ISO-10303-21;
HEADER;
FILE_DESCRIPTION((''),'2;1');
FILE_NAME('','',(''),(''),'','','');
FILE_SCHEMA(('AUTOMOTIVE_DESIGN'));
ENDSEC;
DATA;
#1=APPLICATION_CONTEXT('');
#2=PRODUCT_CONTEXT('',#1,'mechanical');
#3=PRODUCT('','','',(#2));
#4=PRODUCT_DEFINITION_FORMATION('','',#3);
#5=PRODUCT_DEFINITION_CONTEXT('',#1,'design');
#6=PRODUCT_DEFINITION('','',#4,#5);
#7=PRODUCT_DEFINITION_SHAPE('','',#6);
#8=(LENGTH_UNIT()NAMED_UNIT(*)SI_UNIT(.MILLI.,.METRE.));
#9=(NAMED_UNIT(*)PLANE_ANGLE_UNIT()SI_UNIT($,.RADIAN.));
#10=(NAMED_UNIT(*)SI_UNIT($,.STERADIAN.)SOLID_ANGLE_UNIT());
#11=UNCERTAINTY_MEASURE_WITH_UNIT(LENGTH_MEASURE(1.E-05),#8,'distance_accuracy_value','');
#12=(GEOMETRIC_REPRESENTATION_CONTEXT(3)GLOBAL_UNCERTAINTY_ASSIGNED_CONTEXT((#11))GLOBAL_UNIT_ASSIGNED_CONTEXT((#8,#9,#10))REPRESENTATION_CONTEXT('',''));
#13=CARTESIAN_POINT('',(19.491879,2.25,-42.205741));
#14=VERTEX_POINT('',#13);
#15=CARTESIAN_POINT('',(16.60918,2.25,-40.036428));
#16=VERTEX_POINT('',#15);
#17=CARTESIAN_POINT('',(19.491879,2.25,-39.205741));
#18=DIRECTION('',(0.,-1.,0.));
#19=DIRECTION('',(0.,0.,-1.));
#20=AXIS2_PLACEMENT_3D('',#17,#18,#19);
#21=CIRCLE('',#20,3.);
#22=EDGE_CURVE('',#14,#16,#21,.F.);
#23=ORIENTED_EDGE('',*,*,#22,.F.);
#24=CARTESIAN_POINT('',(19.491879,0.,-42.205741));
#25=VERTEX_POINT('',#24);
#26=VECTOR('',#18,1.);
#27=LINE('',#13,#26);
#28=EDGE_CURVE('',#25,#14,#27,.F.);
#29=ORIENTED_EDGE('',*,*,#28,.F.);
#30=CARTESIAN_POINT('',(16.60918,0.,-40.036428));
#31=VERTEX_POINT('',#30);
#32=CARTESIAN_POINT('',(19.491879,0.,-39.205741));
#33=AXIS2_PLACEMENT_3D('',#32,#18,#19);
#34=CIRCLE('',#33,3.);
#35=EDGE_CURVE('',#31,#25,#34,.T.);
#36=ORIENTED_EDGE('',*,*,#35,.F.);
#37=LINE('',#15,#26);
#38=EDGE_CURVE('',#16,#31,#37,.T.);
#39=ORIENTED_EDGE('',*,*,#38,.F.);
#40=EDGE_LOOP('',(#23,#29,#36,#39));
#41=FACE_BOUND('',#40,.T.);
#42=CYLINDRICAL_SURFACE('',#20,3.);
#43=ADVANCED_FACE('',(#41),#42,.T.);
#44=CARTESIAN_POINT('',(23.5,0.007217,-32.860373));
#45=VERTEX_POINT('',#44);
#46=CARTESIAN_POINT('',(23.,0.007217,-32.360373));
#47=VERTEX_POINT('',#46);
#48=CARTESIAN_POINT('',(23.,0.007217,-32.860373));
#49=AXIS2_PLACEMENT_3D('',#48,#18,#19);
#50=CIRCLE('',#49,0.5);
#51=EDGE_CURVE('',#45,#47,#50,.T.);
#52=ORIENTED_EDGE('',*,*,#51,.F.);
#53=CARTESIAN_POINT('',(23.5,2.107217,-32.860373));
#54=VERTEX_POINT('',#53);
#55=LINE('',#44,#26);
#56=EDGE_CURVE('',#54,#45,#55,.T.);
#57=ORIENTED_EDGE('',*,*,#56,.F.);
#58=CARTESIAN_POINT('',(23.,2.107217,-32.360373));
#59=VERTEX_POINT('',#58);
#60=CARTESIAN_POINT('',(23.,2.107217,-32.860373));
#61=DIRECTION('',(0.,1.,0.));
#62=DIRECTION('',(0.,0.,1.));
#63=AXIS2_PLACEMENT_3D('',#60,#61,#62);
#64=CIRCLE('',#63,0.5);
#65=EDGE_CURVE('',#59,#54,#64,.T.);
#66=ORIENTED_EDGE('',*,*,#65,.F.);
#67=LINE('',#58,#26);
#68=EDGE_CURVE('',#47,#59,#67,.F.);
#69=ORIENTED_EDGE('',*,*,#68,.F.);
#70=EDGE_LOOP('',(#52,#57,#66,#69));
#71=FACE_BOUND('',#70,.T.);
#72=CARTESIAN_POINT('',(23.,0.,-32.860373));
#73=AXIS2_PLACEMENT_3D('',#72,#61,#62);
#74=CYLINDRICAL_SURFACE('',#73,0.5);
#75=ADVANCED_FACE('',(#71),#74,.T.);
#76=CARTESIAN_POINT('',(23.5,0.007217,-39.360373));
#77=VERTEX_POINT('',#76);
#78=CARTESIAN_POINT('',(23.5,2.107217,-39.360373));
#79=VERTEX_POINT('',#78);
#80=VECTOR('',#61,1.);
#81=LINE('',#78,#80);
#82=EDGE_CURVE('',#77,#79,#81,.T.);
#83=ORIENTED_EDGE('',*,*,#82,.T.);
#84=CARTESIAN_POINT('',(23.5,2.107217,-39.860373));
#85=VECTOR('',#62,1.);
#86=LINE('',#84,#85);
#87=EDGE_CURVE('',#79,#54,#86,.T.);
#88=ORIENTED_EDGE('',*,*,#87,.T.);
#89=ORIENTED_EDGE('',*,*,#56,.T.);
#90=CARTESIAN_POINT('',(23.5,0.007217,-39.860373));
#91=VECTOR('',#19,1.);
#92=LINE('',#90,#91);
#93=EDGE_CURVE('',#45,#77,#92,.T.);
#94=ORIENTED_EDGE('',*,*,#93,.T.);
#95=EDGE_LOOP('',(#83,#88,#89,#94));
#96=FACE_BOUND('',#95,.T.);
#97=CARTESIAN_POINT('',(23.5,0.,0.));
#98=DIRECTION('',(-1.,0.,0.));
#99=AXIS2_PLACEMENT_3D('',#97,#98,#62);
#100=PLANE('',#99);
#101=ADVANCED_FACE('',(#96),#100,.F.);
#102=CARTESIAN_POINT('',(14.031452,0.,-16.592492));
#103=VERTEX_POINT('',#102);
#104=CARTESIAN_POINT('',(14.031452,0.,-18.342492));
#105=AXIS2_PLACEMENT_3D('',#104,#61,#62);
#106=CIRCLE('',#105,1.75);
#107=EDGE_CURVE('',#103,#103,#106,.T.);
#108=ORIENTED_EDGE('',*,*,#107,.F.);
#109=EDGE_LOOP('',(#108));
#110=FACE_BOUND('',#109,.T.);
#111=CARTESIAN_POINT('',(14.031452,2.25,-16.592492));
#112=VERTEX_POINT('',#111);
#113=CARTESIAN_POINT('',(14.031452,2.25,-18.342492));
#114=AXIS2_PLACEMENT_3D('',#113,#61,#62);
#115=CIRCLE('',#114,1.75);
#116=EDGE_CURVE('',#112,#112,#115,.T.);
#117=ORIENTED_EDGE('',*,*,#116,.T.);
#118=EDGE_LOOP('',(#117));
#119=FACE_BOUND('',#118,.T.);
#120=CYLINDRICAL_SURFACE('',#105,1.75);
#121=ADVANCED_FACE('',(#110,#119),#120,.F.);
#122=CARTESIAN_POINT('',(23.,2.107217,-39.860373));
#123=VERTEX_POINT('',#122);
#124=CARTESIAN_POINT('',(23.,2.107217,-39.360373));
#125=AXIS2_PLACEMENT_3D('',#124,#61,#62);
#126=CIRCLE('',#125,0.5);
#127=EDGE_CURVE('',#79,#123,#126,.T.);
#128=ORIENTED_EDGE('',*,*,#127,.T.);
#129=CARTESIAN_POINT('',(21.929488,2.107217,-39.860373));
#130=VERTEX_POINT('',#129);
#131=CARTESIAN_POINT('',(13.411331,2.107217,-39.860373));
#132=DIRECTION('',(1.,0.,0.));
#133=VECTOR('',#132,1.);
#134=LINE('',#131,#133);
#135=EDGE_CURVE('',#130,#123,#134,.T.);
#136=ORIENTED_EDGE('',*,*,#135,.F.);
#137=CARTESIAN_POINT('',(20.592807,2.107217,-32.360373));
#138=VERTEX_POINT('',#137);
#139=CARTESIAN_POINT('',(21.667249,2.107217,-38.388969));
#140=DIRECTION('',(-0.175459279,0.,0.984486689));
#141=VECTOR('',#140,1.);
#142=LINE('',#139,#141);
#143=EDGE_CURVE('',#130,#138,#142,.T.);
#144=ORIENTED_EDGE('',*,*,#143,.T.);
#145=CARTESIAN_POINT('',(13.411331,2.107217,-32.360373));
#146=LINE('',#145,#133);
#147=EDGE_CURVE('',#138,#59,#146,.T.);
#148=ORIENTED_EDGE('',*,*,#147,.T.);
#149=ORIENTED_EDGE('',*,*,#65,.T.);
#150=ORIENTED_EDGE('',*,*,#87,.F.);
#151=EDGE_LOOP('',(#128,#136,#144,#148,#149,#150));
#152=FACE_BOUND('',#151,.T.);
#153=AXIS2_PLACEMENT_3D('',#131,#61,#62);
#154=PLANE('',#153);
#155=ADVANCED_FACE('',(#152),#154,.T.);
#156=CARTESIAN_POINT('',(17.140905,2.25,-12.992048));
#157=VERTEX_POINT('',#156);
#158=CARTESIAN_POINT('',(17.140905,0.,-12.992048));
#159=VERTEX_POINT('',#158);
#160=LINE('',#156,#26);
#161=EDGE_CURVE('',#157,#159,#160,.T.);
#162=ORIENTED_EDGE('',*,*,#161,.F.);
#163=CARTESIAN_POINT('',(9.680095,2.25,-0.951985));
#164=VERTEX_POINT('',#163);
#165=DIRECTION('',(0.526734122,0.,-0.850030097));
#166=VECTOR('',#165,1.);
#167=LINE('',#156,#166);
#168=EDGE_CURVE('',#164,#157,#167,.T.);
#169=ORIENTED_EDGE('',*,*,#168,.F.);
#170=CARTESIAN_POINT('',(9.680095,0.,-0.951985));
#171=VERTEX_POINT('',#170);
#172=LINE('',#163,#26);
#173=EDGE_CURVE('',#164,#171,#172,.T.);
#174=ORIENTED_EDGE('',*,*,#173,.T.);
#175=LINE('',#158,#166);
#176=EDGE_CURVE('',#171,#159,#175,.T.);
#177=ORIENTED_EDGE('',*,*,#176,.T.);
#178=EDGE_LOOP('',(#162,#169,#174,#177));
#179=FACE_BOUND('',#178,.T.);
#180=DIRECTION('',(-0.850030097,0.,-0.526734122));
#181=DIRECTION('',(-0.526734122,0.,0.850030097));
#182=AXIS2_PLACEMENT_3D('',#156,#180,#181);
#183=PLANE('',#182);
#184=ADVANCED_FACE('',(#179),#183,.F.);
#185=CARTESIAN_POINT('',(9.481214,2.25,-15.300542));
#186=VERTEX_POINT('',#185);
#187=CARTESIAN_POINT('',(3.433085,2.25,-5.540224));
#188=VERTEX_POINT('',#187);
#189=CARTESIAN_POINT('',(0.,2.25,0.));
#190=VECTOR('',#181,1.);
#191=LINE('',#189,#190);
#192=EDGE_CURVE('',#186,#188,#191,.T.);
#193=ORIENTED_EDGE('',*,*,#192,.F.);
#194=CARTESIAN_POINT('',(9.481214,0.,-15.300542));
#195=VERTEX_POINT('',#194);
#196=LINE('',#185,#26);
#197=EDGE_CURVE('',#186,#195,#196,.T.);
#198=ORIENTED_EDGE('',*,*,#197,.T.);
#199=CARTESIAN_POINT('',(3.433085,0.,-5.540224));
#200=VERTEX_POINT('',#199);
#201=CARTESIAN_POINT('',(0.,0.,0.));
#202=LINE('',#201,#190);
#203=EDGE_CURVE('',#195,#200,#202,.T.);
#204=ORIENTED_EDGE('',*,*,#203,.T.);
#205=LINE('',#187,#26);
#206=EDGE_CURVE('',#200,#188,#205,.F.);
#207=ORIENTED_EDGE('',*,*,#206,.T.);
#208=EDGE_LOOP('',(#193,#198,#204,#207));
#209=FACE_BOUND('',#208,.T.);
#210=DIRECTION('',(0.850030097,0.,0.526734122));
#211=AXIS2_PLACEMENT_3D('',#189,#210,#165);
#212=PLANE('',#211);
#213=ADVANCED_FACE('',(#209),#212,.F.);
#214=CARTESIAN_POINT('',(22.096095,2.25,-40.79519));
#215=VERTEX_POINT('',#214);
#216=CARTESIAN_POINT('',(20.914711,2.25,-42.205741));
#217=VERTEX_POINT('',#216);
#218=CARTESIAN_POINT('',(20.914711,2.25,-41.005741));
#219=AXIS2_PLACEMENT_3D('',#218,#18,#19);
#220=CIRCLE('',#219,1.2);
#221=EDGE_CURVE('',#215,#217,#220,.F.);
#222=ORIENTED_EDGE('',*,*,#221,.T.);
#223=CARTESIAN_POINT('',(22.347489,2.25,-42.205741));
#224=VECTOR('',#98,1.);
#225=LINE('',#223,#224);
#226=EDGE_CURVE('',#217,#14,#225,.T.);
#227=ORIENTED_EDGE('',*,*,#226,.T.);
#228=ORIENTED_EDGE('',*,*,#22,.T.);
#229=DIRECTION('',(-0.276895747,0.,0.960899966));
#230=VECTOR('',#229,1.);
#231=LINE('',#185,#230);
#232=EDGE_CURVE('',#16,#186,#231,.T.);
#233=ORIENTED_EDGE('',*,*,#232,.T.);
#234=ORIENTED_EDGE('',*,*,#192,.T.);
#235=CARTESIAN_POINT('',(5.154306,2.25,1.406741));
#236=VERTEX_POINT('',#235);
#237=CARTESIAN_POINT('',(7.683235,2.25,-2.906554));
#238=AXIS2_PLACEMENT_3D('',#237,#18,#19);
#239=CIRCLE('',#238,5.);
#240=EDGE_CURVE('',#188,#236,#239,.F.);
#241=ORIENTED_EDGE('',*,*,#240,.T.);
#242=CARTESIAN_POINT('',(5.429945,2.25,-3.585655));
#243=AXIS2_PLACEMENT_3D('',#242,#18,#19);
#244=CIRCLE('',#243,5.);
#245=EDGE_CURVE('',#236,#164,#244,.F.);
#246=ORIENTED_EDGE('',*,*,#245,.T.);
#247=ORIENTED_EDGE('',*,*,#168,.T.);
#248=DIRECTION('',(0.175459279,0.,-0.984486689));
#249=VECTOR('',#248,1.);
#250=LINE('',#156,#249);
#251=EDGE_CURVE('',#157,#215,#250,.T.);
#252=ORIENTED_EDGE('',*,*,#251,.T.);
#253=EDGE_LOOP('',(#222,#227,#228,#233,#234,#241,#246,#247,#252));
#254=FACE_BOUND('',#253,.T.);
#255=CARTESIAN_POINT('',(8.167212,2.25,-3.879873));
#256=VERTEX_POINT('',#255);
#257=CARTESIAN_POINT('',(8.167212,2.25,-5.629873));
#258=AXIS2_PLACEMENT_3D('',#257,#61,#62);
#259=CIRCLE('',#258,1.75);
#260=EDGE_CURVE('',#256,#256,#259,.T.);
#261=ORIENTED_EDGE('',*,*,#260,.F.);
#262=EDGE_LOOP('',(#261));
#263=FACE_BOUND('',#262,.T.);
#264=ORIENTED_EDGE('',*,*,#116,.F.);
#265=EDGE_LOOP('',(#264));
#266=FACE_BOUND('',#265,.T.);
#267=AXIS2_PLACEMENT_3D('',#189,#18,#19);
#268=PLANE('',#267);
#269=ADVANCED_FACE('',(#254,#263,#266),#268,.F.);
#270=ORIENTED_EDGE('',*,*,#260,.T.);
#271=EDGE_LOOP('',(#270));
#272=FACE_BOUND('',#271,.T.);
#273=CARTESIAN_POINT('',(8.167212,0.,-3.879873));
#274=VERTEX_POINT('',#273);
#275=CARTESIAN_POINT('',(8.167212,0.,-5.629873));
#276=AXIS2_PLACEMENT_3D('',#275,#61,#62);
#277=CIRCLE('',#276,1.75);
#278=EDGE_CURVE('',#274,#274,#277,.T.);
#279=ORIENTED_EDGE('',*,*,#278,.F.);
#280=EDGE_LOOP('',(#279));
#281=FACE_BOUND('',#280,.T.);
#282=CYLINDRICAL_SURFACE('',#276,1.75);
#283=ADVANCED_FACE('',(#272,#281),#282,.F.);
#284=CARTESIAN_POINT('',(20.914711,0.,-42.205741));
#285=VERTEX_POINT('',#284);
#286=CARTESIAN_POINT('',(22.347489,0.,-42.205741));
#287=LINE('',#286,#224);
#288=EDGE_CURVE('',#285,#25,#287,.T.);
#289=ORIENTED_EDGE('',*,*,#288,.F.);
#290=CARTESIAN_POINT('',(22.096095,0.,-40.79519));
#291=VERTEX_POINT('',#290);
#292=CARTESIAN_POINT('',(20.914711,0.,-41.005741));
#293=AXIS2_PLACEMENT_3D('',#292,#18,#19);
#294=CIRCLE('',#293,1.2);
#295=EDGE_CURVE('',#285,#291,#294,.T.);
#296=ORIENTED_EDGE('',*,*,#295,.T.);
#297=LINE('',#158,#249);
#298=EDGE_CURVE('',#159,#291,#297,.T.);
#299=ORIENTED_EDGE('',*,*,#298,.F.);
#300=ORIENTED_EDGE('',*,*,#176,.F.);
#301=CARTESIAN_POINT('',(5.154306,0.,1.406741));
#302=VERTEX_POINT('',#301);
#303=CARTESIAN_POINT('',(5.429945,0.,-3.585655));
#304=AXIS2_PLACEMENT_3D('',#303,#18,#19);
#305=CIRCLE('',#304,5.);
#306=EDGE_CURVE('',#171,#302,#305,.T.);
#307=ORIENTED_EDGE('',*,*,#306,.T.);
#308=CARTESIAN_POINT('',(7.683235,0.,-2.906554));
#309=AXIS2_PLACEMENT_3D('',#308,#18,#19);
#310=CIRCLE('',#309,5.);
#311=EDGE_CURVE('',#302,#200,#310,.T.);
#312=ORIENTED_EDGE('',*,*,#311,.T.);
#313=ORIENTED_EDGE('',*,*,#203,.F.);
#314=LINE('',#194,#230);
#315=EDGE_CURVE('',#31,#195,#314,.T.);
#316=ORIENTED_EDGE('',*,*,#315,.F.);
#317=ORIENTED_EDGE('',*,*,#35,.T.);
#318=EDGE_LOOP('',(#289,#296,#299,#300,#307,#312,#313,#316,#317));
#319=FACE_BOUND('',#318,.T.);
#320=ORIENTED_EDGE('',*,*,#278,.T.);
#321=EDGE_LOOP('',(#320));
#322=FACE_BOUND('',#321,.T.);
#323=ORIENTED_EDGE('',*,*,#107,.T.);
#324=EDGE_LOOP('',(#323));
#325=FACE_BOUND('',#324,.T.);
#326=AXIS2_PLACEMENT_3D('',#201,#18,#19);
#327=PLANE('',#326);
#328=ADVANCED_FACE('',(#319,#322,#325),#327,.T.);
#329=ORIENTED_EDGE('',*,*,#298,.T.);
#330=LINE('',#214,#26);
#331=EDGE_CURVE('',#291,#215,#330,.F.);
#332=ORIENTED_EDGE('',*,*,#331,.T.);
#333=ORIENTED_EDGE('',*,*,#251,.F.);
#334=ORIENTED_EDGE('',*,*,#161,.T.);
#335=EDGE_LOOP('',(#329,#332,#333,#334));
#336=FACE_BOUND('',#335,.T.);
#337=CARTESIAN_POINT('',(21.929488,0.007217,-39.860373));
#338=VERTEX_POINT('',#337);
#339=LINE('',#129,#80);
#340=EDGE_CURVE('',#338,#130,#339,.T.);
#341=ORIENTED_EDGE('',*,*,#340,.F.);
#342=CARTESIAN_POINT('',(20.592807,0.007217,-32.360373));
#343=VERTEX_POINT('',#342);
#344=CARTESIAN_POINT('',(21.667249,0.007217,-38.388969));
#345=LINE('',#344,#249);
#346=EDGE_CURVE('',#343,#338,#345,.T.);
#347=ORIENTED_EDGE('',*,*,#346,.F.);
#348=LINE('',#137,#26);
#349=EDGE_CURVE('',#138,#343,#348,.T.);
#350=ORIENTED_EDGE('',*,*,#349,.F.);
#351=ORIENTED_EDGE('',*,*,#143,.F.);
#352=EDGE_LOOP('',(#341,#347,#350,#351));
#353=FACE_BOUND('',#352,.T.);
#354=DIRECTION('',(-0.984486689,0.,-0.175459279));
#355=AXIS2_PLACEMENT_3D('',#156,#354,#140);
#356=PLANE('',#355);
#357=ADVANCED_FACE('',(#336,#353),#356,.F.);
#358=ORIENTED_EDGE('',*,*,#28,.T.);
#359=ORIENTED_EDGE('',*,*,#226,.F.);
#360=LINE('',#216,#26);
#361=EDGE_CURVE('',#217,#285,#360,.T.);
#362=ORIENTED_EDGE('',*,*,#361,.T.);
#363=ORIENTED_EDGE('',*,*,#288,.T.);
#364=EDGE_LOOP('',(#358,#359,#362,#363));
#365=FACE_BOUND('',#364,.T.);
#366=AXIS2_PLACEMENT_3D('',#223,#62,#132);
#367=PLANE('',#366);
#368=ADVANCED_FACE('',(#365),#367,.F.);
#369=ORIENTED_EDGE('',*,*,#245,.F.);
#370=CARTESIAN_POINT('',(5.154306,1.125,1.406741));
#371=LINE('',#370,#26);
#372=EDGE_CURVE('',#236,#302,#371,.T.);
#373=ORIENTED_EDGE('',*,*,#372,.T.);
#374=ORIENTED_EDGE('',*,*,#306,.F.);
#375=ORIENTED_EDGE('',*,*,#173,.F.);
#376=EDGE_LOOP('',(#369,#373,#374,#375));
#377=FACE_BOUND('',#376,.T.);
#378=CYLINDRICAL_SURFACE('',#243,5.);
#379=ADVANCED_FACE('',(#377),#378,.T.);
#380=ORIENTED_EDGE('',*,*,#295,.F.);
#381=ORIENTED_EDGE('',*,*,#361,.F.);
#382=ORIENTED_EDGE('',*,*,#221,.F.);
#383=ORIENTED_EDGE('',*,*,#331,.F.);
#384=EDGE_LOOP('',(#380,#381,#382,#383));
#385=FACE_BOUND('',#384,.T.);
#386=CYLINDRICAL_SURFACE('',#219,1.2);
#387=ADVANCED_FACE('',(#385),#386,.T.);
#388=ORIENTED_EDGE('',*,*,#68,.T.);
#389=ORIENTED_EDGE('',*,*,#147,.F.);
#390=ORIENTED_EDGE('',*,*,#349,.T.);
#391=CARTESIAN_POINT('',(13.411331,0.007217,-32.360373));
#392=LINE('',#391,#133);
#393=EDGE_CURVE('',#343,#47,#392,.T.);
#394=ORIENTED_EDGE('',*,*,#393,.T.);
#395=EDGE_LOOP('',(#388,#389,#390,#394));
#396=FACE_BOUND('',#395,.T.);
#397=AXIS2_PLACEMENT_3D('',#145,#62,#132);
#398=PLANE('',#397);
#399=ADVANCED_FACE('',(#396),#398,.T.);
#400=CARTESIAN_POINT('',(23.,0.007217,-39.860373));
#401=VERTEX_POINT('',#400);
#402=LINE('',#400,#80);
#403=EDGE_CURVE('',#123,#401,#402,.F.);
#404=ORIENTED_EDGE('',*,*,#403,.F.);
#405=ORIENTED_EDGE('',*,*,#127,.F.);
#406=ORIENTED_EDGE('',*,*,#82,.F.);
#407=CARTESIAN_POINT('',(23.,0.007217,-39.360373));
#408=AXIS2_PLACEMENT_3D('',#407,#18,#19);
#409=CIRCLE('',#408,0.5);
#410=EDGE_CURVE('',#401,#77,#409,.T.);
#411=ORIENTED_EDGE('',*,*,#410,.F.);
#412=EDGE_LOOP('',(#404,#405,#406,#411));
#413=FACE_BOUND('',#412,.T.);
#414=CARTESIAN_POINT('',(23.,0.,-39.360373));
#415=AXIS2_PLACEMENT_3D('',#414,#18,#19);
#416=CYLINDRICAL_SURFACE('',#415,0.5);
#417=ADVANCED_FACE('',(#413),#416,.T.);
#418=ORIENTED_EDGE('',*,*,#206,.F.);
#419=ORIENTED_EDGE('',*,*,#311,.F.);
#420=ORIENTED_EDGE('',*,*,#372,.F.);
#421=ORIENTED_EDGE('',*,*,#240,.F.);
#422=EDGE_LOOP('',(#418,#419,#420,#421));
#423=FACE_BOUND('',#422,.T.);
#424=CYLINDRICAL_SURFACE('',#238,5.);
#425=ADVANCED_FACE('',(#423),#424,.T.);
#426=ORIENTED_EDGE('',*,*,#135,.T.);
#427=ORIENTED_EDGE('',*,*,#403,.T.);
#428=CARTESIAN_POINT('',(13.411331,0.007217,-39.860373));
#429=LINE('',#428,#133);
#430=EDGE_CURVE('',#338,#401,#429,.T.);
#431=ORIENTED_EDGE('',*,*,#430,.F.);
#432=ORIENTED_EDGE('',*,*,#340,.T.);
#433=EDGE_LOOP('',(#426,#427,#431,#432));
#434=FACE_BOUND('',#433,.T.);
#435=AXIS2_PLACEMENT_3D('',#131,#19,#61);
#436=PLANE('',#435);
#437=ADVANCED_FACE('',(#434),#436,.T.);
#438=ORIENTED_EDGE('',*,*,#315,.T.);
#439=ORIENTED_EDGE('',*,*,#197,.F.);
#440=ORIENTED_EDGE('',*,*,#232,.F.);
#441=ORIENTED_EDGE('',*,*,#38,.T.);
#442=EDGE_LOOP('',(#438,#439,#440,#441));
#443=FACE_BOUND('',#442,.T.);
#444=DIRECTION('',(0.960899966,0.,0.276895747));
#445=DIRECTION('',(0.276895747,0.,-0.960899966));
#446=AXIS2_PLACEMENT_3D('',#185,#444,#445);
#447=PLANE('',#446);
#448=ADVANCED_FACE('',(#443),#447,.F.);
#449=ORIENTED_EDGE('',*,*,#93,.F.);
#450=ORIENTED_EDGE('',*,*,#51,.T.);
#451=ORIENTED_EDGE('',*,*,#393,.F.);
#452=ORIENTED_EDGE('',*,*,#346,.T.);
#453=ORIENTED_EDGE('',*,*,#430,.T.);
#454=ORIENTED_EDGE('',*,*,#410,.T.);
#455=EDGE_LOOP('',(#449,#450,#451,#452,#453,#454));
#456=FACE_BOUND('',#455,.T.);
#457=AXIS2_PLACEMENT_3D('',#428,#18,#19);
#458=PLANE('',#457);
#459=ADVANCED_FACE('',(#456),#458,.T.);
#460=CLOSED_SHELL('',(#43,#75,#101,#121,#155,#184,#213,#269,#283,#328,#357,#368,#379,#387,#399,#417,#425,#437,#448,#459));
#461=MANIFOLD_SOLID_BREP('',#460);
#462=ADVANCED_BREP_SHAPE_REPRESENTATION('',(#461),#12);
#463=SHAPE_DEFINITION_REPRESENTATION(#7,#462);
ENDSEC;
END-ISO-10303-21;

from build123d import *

# Parameters (mm, degrees)
BOSS_EXTRUDE1_DEPTH = 2.25
FILLET1_R           = 5
SKETCH2_R           = 1.75
CUT_EXTRUDE1_DEPTH  = 48.810012982
BOSS_EXTRUDE2_REACH = 42.044
SKETCH4_W           = 7.5
SKETCH4_H           = 2.1
SKETCH4_2_W         = 7.5
SKETCH4_2_H         = 2.1
BOSS_EXTRUDE3_DEPTH = 1.570511633
FILLET2_R           = 3
FILLET3_R           = 1.2
FILLET4_R           = 0.5


with BuildPart() as part:
    # Sketch1 → Boss-Extrude1 (new body)
    with BuildSketch(Plane(origin=(0, 0, 0), x_dir=(1, 0, 0), z_dir=(0, 1, 0))):
        Polygon((0, 0), (9.481214188, 15.300541739), (17.234295106, 42.205740796), (22.347489461, 42.205740796), (17.140904697, 12.99204844), (7.659690509, -2.308493299), align=None)
    extrude(amount=BOSS_EXTRUDE1_DEPTH)

    # Fillet1
    # the kernel refuses this fillet: 5 mm, written as the material it takes off along each edge
    with BuildSketch(Plane(origin=(7.659690509, -9.589301146, 2.308493299), x_dir=(0.5267341215597666, 0, -0.8500300966346198), z_dir=(0, 1, 0))) as fillet1_piece_1:
        with BuildLine():
            CenterArc((FILLET1_R * 0.767144091705, FILLET1_R), FILLET1_R, 195.013192562, 74.986807438)
            Line((-FILLET1_R * 0.19872211495, FILLET1_R * 0.740958553812), (0, 0))
            Line((0, 0), (FILLET1_R * 0.767144091705, 0))
        make_face()
    extrude(amount=21.428602293, mode=Mode.SUBTRACT)
    with BuildSketch(Plane(origin=(0, -16.294200966, 0), x_dir=(0.5267341215597675, 0, -0.8500300966346193), z_dir=(0, 1, 0))) as fillet1_piece_2:
        with BuildLine():
            CenterArc((FILLET1_R * 1.30353607727, -FILLET1_R), FILLET1_R, 90, 105.013192562)
            Line((FILLET1_R * 0.337669870614, -FILLET1_R * 1.25904144619), (0, 0))
            Line((0, 0), (FILLET1_R * 1.30353607727, 0))
        make_face()
    extrude(amount=34.838401932, mode=Mode.SUBTRACT)

    # Sketch2 → Cut-Extrude1 (cut, through all)
    with BuildSketch(Plane(origin=(0, 2.25, 0), x_dir=(1, 0, 0), z_dir=(0, 1, 0))):
        with Locations(Location((8.167211871, 5.629873064, 0), (0, 0, 270))):
            Circle(SKETCH2_R)
        with Locations(Location((14.031451824, 18.342492377, 0), (0, 0, 270))):
            Circle(SKETCH2_R)
    extrude(amount=-CUT_EXTRUDE1_DEPTH, mode=Mode.SUBTRACT)

    # Boss-Extrude2: up to this plane
    boss_extrude2_end = Plane(origin=(17.140904697, 2.25, -12.99204844), z_dir=(-0.9844866893056965, 0, -0.17545927897922378))
    # Sketch4 → Boss-Extrude2 (add, up to the surface)
    with BuildSketch(Plane(origin=(23.5, -1.484709168, -8.201879583), x_dir=(0, 0, -1), z_dir=(1, 0, 0)), mode=Mode.PRIVATE) as boss_extrude2_sk1:
        with Locations((27.908493587, 2.541926215)):
            Rectangle(SKETCH4_W, SKETCH4_H)
    boss_extrude2_tool1 = split(extrude(boss_extrude2_sk1.sketch, amount=-BOSS_EXTRUDE2_REACH, mode=Mode.PRIVATE), bisect_by=boss_extrude2_end, keep=Keep.BOTH, mode=Mode.PRIVATE)
    add(boss_extrude2_tool1.solids().sort_by_distance((23.5, 1.057217, -36.110373))[0])

    # Sketch4<2> → Boss-Extrude3 (add)
    with BuildSketch(Plane(origin=(23.5, -1.484709168, -8.201879583), x_dir=(0, 0, -1), z_dir=(1, 0, 0))):
        with Locations((27.908493587, 2.541926215)):
            Rectangle(SKETCH4_2_W, SKETCH4_2_H)
    extrude(amount=-BOSS_EXTRUDE3_DEPTH)

    # Fillet2
    fillet2_edges = [part.edges().sort_by_distance(p)[0] for p in [
        (17.234295106, 1.125, -42.205740796),
    ]]
    fillet(fillet2_edges, radius=FILLET2_R)

    # Fillet3
    fillet3_edges = [part.edges().sort_by_distance(p)[0] for p in [
        (22.347489461, 1.125, -42.205740796),
    ]]
    fillet(fillet3_edges, radius=FILLET3_R)

    # Fillet4
    fillet4_edges = [part.edges().sort_by_distance(p)[0] for p in [
        (23.5, 1.057217047, -39.86037317),
        (23.5, 1.057217047, -32.36037317),
    ]]
    fillet(fillet4_edges, radius=FILLET4_R)


solid = part.part
